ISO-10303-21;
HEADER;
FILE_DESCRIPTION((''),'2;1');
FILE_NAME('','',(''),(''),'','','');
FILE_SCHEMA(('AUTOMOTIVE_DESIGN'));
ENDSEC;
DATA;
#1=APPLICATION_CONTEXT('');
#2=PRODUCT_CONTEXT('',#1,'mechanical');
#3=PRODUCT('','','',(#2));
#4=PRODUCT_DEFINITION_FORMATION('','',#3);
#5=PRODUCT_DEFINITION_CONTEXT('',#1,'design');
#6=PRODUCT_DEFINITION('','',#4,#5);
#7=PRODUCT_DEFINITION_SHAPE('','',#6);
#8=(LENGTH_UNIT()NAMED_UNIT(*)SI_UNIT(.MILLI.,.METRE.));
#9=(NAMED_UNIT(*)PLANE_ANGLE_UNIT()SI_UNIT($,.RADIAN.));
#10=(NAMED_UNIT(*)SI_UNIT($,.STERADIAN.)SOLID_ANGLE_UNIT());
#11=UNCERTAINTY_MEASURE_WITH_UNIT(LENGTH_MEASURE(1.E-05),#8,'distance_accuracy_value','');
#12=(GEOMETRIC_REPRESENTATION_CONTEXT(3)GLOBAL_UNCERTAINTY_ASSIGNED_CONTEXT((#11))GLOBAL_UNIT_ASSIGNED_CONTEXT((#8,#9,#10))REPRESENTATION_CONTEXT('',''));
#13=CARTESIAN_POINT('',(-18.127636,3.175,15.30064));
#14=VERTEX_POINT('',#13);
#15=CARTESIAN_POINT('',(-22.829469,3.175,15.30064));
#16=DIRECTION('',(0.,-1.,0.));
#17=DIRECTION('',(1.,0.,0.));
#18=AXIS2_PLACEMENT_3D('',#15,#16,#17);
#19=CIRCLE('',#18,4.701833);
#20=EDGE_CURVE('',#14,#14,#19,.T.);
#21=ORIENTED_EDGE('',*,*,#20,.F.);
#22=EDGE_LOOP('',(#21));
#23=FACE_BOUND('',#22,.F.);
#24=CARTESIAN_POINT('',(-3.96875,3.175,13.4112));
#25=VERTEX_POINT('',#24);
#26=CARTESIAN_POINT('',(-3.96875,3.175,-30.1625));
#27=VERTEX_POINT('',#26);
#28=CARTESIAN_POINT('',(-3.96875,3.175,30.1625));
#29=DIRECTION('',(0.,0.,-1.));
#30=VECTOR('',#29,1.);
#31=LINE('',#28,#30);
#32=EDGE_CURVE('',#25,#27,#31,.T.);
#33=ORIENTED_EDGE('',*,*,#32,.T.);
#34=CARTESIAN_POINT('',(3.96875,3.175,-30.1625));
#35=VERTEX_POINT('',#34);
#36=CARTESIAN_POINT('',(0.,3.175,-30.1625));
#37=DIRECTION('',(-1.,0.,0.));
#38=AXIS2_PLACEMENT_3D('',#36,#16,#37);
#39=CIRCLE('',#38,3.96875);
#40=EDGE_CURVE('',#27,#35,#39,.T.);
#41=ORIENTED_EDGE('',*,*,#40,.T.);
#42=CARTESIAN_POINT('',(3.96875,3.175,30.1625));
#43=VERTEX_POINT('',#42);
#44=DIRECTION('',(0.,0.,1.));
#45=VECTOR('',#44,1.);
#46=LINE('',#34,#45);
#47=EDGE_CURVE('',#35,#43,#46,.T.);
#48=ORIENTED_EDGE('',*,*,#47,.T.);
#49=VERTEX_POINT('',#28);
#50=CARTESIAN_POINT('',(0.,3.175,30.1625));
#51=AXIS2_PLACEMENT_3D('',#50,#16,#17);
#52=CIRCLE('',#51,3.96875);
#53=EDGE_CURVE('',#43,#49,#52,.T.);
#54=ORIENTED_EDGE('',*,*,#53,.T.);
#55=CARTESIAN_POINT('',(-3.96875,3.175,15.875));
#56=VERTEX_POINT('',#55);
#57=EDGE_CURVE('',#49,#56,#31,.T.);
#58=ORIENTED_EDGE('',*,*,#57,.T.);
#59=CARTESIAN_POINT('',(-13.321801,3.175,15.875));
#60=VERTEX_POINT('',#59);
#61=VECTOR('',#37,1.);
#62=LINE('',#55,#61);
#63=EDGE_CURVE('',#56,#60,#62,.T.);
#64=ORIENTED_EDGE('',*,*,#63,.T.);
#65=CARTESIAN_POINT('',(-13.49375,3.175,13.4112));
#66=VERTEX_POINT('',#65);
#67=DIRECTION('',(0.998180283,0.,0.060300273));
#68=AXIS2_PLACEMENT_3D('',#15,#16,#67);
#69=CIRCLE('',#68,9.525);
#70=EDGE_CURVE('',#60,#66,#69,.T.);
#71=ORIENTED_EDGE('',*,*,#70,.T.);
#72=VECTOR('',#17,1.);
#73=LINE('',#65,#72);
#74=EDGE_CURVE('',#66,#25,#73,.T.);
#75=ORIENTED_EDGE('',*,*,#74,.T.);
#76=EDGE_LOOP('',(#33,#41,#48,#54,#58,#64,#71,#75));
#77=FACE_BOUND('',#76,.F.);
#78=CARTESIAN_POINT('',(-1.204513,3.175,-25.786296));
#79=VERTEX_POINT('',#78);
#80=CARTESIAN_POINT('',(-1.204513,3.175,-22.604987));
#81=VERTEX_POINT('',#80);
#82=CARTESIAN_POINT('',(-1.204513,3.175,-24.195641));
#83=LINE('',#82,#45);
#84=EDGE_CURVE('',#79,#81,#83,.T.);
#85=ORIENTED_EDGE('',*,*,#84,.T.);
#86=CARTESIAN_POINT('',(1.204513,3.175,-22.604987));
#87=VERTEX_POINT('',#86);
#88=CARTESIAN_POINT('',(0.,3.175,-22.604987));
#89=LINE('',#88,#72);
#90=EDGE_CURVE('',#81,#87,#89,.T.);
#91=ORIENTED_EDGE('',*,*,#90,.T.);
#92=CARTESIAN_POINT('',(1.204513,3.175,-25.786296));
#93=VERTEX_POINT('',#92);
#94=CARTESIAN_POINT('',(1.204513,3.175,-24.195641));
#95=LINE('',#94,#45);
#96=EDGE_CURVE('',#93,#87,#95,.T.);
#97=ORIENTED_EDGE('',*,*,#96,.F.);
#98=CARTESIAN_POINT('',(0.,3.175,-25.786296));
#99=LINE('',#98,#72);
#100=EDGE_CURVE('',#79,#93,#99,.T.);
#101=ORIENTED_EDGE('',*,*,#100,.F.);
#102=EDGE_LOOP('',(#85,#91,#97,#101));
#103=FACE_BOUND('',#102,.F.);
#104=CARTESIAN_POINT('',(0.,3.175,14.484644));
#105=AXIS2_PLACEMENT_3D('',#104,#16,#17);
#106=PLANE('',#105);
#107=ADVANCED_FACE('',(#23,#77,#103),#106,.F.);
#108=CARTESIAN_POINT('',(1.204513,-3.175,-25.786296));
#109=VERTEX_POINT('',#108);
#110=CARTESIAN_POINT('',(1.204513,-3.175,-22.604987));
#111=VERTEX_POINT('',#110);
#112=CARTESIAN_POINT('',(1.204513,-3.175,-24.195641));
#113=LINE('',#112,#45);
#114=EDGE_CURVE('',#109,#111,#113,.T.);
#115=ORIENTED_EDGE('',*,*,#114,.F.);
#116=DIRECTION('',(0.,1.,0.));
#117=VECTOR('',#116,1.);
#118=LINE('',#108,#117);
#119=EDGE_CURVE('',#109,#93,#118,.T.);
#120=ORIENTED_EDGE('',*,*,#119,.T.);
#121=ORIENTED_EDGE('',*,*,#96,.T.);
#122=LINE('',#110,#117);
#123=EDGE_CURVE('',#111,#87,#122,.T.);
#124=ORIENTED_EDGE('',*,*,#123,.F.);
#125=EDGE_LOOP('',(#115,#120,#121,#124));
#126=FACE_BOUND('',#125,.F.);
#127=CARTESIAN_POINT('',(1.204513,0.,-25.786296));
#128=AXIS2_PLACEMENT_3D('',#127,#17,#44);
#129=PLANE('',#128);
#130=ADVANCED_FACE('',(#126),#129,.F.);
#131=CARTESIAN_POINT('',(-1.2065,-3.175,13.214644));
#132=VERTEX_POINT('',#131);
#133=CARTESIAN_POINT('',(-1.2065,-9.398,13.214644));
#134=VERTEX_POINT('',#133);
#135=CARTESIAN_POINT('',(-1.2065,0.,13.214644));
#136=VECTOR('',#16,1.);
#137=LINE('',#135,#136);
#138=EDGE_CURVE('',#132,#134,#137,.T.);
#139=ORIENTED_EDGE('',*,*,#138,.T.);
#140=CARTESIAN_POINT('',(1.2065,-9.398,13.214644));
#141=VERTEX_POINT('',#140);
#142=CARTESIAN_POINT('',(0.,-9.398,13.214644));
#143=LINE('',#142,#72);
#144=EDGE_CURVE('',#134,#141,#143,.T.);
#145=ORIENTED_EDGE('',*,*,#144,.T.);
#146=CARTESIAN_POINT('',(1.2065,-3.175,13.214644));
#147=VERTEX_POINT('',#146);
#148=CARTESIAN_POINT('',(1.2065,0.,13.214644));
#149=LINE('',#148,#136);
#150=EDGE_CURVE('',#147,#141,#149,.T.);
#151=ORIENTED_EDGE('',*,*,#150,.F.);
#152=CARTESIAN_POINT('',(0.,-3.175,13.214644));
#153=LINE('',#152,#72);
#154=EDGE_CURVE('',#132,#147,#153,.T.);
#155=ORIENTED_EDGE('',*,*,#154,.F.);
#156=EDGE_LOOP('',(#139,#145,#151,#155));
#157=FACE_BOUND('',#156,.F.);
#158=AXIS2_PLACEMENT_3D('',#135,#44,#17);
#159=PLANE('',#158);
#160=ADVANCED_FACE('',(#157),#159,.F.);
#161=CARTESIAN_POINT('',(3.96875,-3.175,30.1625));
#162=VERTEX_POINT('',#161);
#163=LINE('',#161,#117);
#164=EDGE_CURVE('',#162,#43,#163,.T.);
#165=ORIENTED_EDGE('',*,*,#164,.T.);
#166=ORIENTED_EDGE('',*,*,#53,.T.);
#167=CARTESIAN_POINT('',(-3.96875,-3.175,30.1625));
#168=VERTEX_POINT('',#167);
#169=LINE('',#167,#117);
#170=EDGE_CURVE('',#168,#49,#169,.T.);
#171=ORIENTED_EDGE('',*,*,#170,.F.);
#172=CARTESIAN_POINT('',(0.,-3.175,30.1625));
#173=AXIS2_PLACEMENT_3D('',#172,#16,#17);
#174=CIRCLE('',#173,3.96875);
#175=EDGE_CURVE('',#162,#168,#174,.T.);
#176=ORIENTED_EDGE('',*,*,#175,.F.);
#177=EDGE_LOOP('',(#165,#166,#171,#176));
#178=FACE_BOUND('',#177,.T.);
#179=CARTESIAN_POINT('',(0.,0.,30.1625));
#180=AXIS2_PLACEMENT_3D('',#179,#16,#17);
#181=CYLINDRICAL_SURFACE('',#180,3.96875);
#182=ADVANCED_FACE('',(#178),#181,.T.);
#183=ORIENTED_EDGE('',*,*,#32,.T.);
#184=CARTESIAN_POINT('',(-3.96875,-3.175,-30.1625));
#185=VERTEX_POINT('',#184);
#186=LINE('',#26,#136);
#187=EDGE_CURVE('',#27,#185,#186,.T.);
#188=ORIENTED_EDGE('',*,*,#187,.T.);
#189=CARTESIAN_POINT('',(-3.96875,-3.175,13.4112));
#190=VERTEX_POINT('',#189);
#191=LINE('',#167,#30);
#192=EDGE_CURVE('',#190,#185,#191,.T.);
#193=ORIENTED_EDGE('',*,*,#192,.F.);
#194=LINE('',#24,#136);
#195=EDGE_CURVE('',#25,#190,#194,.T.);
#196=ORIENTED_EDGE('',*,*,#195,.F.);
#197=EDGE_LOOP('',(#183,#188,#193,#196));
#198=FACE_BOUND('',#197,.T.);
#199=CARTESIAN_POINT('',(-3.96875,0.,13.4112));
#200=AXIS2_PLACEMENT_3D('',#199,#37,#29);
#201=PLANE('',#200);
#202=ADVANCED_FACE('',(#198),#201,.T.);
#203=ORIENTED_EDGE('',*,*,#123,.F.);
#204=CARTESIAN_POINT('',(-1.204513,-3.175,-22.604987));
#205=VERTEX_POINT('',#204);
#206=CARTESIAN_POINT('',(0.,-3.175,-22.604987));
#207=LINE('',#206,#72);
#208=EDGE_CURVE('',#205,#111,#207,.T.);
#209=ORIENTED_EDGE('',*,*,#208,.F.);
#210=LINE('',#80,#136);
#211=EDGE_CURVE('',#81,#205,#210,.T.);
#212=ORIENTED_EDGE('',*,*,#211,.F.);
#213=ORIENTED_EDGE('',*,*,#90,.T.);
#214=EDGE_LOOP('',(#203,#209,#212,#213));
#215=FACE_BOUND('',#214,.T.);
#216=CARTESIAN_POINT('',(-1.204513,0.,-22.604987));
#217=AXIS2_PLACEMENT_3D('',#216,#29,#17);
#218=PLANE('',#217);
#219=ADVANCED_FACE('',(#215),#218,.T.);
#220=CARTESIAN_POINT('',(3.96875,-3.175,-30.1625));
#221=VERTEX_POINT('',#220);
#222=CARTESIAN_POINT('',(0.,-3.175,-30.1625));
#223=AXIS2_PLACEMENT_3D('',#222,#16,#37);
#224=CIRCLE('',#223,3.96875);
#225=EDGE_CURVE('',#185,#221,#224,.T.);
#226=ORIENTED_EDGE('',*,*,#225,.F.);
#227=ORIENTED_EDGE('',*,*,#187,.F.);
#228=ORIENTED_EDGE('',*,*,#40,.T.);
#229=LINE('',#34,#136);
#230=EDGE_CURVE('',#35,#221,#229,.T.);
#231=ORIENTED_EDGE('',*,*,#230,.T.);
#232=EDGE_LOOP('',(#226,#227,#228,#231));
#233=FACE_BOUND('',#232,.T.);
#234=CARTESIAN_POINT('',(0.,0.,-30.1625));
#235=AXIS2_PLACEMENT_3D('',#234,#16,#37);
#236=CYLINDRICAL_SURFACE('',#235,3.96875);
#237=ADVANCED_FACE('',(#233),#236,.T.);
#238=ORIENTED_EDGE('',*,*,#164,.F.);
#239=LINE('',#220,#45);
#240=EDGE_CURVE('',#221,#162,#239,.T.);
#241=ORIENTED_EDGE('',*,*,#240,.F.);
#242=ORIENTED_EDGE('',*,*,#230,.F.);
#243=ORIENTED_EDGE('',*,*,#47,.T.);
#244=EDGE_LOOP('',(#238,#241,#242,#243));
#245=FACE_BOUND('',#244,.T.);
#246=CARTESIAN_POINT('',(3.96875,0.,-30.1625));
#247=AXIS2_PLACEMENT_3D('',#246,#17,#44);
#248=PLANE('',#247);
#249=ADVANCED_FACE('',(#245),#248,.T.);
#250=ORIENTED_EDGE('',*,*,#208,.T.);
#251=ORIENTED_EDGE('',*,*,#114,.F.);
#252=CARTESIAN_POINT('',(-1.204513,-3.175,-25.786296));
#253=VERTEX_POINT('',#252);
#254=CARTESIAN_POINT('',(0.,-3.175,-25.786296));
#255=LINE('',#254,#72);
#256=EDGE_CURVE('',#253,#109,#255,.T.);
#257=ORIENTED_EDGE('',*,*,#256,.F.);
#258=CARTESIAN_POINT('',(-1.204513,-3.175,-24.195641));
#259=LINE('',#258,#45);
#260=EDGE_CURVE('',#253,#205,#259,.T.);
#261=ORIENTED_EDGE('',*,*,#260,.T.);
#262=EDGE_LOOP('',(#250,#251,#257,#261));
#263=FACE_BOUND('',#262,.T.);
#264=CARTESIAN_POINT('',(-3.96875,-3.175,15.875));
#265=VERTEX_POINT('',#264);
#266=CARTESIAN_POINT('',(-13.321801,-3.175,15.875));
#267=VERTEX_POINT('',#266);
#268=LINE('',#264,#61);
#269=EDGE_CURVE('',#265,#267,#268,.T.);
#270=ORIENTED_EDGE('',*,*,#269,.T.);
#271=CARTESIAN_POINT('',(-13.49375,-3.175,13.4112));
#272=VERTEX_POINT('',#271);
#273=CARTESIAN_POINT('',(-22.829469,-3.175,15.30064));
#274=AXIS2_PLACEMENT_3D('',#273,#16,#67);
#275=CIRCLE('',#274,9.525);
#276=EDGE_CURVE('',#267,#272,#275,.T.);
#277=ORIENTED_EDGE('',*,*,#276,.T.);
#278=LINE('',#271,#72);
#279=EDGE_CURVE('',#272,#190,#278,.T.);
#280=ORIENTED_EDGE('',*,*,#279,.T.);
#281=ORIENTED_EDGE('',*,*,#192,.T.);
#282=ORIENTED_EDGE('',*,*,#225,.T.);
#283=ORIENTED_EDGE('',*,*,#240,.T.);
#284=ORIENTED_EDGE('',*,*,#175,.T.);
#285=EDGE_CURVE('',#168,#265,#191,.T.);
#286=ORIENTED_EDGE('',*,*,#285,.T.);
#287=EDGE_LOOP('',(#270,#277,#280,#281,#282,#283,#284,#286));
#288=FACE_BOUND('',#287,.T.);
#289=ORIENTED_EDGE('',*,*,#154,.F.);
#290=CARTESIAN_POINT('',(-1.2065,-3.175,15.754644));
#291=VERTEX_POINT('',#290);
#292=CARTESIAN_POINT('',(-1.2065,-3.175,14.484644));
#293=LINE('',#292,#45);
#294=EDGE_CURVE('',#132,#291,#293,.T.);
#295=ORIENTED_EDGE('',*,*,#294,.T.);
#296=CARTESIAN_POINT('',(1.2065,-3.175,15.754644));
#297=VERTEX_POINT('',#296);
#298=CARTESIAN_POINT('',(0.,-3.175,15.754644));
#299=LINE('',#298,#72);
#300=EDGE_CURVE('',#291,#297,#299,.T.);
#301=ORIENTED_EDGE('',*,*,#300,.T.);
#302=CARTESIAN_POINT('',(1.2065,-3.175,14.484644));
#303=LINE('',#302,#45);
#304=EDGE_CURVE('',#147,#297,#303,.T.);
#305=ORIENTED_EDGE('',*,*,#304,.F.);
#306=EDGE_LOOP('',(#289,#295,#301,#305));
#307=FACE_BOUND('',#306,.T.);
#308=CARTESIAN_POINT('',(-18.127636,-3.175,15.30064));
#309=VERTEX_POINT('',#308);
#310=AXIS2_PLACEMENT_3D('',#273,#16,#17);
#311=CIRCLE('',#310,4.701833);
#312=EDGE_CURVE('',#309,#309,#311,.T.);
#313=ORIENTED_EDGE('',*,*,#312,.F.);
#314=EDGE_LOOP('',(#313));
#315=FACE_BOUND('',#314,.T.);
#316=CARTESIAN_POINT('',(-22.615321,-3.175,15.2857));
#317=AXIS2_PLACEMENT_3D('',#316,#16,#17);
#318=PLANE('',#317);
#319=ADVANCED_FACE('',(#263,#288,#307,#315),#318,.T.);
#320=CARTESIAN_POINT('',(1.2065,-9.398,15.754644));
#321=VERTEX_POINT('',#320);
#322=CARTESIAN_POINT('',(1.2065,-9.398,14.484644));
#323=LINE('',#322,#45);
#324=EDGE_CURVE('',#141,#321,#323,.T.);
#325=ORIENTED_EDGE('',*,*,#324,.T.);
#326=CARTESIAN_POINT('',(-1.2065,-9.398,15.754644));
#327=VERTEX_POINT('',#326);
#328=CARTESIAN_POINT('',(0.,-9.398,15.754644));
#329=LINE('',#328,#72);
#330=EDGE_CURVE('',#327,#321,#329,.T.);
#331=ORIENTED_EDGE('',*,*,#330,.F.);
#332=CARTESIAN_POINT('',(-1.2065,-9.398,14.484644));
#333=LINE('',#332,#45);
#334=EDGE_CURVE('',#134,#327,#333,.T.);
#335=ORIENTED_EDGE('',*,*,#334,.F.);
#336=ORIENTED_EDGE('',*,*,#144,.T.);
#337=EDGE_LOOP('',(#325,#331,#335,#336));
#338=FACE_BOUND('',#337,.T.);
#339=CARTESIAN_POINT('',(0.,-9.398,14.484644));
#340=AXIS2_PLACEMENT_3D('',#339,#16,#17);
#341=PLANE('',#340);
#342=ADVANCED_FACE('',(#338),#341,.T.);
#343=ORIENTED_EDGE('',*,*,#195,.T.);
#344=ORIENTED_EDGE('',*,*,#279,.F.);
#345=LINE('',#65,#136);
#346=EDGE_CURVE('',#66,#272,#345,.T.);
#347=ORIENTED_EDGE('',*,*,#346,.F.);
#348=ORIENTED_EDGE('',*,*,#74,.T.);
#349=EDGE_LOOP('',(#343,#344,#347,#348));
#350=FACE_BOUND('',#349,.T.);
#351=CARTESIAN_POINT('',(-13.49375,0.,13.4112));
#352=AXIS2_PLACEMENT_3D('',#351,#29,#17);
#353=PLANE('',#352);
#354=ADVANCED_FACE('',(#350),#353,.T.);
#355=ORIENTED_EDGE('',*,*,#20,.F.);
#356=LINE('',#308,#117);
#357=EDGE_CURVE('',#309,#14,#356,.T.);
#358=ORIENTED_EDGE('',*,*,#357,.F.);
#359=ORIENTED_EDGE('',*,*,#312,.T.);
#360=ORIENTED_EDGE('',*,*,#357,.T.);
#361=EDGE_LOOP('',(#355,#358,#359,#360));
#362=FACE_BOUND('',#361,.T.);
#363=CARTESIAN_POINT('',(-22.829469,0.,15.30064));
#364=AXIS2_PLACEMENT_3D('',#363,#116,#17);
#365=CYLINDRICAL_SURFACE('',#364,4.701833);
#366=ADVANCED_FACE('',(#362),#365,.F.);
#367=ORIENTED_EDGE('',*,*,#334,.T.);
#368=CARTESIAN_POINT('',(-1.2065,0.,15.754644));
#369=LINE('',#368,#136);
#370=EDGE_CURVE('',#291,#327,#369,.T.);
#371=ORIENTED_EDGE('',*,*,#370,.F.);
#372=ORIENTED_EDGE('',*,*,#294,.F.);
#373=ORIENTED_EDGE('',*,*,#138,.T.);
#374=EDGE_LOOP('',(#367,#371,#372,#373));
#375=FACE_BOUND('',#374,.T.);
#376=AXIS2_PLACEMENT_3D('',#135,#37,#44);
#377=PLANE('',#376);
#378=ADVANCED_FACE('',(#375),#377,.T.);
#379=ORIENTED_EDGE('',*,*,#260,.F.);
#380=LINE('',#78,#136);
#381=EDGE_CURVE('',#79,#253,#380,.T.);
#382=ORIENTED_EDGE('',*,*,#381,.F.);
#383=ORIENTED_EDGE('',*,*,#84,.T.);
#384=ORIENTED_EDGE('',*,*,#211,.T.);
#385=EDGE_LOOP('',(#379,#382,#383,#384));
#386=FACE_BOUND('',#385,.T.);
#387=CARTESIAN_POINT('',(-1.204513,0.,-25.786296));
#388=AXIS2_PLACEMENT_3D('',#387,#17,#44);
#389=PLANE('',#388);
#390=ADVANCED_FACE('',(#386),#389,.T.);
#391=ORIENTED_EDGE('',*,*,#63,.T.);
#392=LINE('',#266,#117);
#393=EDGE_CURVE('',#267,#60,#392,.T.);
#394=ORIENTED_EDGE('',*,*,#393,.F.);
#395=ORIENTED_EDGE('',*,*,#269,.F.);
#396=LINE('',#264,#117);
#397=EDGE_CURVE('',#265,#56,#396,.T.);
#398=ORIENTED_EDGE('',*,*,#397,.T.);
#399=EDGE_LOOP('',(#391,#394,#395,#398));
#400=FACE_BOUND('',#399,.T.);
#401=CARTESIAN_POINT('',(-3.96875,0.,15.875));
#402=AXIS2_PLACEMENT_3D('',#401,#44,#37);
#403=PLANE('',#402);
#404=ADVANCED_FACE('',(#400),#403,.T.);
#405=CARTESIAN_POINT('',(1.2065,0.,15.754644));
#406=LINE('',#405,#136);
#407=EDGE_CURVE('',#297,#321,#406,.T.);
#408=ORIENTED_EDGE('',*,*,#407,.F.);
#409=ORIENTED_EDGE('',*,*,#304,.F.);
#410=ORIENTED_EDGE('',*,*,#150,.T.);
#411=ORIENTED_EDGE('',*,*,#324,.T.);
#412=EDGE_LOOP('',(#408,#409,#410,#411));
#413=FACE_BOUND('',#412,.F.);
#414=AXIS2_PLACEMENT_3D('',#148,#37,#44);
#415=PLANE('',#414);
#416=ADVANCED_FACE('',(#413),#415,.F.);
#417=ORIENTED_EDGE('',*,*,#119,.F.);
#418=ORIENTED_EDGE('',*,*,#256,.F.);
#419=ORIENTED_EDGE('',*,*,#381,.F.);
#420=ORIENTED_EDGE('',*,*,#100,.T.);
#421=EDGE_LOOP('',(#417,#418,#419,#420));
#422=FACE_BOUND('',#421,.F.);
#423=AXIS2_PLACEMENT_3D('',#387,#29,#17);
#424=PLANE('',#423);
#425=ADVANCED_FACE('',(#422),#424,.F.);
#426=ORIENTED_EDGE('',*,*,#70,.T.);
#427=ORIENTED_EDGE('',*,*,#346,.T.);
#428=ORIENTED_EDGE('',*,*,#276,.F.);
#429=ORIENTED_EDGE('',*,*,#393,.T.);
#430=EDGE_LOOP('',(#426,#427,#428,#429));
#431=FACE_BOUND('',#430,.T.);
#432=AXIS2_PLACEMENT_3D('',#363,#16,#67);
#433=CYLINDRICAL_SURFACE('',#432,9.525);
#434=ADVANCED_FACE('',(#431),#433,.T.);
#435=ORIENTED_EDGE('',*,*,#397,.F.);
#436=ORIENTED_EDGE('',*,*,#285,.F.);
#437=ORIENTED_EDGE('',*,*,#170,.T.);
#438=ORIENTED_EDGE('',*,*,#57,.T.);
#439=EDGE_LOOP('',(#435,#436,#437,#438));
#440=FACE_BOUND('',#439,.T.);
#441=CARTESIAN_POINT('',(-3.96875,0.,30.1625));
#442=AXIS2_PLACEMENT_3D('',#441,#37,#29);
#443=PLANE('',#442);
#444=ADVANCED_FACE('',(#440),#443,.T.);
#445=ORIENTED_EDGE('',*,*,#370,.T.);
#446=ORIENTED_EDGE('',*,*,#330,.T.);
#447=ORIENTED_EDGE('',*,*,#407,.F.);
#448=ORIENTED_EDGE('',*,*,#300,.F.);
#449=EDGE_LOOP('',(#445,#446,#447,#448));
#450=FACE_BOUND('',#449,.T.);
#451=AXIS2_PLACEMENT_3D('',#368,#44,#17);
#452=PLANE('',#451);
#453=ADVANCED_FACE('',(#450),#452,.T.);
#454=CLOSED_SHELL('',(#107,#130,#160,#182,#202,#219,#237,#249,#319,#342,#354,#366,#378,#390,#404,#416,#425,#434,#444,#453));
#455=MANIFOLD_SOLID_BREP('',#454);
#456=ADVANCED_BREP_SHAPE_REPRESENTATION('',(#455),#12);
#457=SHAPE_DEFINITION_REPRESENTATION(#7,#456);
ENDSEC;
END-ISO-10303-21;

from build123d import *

# Parameters (mm, degrees)
F0_R     = 4.7018325436
F0_W     = 2.4090255611
F0_H     = 3.1813085079
F0_W_2   = 2.413
F0_H_2   = 2.54
F1_DEPTH = 3.175
F2_DEPTH = 9.398
F3_DEPTH = 3.175


# Not quite as in the source:
# - a feature names something its author has since deleted; it is built from what else it names


with BuildPart() as f1:
    # F0 (on Front) → F1 (new body, symmetric)
    with BuildSketch(Plane.XZ):
        with BuildLine():
            ThreePointArc((-13.3044686056, 15.3006398952), (-13.3088027932, 15.5879506834), (-13.3218014117, 15.875))
            ThreePointArc((-13.3218014117, 15.875), (-32.3313565604, 15.9637766028), (-13.49375, 13.4112))
            ThreePointArc((-13.49375, 13.4112), (-13.3519070859, 14.3511912968), (-13.3044686056, 15.3006398952))
        make_face()
        with Locations((-22.8294686056, 15.3006398952)):
            Circle(F0_R, mode=Mode.SUBTRACT)
        with BuildLine():
            Line((-3.96875, 13.4112), (-3.96875, 15.875))
            Line((-3.96875, 15.875), (-13.3218014117, 15.875))
            ThreePointArc((-13.3218014117, 15.875), (-13.3088027932, 15.5879506834), (-13.3044686056, 15.3006398952))
            ThreePointArc((-13.3044686056, 15.3006398952), (-13.3519070859, 14.3511912968), (-13.49375, 13.4112))
            Line((-13.49375, 13.4112), (-3.96875, 13.4112))
        make_face()
        with BuildLine():
            Line((3.96875, -30.1625), (3.96875, 30.1625))
            ThreePointArc((3.96875, 30.1625), (0, 34.13125), (-3.96875, 30.1625))
            Line((-3.96875, 30.1625), (-3.96875, 15.875))
            Line((-3.96875, 15.875), (-3.96875, 13.4112))
            Line((-3.96875, 13.4112), (-3.96875, -30.1625))
            ThreePointArc((-3.96875, -30.1625), (0, -34.13125), (3.96875, -30.1625))
        make_face()
        with Locations((0, -24.1956412792)):
            Rectangle(F0_W, F0_H, mode=Mode.SUBTRACT)
        with Locations((0, 14.4846439362)):
            Rectangle(F0_W_2, F0_H_2, mode=Mode.SUBTRACT)
    extrude(amount=F1_DEPTH, both=True)

    # F0 (on Front) → F2 (join)
    with BuildSketch(Plane.XZ):
        with Locations((0, 14.4846439362)):
            Rectangle(F0_W_2, F0_H_2)
    extrude(amount=F2_DEPTH)

    # F0 (on Front) → F3 (join)
    with BuildSketch(Plane.XZ):
        with Locations((0, 14.4846439362)):
            Rectangle(F0_W_2, F0_H_2)
    extrude(amount=-F3_DEPTH)


solid = f1.part
